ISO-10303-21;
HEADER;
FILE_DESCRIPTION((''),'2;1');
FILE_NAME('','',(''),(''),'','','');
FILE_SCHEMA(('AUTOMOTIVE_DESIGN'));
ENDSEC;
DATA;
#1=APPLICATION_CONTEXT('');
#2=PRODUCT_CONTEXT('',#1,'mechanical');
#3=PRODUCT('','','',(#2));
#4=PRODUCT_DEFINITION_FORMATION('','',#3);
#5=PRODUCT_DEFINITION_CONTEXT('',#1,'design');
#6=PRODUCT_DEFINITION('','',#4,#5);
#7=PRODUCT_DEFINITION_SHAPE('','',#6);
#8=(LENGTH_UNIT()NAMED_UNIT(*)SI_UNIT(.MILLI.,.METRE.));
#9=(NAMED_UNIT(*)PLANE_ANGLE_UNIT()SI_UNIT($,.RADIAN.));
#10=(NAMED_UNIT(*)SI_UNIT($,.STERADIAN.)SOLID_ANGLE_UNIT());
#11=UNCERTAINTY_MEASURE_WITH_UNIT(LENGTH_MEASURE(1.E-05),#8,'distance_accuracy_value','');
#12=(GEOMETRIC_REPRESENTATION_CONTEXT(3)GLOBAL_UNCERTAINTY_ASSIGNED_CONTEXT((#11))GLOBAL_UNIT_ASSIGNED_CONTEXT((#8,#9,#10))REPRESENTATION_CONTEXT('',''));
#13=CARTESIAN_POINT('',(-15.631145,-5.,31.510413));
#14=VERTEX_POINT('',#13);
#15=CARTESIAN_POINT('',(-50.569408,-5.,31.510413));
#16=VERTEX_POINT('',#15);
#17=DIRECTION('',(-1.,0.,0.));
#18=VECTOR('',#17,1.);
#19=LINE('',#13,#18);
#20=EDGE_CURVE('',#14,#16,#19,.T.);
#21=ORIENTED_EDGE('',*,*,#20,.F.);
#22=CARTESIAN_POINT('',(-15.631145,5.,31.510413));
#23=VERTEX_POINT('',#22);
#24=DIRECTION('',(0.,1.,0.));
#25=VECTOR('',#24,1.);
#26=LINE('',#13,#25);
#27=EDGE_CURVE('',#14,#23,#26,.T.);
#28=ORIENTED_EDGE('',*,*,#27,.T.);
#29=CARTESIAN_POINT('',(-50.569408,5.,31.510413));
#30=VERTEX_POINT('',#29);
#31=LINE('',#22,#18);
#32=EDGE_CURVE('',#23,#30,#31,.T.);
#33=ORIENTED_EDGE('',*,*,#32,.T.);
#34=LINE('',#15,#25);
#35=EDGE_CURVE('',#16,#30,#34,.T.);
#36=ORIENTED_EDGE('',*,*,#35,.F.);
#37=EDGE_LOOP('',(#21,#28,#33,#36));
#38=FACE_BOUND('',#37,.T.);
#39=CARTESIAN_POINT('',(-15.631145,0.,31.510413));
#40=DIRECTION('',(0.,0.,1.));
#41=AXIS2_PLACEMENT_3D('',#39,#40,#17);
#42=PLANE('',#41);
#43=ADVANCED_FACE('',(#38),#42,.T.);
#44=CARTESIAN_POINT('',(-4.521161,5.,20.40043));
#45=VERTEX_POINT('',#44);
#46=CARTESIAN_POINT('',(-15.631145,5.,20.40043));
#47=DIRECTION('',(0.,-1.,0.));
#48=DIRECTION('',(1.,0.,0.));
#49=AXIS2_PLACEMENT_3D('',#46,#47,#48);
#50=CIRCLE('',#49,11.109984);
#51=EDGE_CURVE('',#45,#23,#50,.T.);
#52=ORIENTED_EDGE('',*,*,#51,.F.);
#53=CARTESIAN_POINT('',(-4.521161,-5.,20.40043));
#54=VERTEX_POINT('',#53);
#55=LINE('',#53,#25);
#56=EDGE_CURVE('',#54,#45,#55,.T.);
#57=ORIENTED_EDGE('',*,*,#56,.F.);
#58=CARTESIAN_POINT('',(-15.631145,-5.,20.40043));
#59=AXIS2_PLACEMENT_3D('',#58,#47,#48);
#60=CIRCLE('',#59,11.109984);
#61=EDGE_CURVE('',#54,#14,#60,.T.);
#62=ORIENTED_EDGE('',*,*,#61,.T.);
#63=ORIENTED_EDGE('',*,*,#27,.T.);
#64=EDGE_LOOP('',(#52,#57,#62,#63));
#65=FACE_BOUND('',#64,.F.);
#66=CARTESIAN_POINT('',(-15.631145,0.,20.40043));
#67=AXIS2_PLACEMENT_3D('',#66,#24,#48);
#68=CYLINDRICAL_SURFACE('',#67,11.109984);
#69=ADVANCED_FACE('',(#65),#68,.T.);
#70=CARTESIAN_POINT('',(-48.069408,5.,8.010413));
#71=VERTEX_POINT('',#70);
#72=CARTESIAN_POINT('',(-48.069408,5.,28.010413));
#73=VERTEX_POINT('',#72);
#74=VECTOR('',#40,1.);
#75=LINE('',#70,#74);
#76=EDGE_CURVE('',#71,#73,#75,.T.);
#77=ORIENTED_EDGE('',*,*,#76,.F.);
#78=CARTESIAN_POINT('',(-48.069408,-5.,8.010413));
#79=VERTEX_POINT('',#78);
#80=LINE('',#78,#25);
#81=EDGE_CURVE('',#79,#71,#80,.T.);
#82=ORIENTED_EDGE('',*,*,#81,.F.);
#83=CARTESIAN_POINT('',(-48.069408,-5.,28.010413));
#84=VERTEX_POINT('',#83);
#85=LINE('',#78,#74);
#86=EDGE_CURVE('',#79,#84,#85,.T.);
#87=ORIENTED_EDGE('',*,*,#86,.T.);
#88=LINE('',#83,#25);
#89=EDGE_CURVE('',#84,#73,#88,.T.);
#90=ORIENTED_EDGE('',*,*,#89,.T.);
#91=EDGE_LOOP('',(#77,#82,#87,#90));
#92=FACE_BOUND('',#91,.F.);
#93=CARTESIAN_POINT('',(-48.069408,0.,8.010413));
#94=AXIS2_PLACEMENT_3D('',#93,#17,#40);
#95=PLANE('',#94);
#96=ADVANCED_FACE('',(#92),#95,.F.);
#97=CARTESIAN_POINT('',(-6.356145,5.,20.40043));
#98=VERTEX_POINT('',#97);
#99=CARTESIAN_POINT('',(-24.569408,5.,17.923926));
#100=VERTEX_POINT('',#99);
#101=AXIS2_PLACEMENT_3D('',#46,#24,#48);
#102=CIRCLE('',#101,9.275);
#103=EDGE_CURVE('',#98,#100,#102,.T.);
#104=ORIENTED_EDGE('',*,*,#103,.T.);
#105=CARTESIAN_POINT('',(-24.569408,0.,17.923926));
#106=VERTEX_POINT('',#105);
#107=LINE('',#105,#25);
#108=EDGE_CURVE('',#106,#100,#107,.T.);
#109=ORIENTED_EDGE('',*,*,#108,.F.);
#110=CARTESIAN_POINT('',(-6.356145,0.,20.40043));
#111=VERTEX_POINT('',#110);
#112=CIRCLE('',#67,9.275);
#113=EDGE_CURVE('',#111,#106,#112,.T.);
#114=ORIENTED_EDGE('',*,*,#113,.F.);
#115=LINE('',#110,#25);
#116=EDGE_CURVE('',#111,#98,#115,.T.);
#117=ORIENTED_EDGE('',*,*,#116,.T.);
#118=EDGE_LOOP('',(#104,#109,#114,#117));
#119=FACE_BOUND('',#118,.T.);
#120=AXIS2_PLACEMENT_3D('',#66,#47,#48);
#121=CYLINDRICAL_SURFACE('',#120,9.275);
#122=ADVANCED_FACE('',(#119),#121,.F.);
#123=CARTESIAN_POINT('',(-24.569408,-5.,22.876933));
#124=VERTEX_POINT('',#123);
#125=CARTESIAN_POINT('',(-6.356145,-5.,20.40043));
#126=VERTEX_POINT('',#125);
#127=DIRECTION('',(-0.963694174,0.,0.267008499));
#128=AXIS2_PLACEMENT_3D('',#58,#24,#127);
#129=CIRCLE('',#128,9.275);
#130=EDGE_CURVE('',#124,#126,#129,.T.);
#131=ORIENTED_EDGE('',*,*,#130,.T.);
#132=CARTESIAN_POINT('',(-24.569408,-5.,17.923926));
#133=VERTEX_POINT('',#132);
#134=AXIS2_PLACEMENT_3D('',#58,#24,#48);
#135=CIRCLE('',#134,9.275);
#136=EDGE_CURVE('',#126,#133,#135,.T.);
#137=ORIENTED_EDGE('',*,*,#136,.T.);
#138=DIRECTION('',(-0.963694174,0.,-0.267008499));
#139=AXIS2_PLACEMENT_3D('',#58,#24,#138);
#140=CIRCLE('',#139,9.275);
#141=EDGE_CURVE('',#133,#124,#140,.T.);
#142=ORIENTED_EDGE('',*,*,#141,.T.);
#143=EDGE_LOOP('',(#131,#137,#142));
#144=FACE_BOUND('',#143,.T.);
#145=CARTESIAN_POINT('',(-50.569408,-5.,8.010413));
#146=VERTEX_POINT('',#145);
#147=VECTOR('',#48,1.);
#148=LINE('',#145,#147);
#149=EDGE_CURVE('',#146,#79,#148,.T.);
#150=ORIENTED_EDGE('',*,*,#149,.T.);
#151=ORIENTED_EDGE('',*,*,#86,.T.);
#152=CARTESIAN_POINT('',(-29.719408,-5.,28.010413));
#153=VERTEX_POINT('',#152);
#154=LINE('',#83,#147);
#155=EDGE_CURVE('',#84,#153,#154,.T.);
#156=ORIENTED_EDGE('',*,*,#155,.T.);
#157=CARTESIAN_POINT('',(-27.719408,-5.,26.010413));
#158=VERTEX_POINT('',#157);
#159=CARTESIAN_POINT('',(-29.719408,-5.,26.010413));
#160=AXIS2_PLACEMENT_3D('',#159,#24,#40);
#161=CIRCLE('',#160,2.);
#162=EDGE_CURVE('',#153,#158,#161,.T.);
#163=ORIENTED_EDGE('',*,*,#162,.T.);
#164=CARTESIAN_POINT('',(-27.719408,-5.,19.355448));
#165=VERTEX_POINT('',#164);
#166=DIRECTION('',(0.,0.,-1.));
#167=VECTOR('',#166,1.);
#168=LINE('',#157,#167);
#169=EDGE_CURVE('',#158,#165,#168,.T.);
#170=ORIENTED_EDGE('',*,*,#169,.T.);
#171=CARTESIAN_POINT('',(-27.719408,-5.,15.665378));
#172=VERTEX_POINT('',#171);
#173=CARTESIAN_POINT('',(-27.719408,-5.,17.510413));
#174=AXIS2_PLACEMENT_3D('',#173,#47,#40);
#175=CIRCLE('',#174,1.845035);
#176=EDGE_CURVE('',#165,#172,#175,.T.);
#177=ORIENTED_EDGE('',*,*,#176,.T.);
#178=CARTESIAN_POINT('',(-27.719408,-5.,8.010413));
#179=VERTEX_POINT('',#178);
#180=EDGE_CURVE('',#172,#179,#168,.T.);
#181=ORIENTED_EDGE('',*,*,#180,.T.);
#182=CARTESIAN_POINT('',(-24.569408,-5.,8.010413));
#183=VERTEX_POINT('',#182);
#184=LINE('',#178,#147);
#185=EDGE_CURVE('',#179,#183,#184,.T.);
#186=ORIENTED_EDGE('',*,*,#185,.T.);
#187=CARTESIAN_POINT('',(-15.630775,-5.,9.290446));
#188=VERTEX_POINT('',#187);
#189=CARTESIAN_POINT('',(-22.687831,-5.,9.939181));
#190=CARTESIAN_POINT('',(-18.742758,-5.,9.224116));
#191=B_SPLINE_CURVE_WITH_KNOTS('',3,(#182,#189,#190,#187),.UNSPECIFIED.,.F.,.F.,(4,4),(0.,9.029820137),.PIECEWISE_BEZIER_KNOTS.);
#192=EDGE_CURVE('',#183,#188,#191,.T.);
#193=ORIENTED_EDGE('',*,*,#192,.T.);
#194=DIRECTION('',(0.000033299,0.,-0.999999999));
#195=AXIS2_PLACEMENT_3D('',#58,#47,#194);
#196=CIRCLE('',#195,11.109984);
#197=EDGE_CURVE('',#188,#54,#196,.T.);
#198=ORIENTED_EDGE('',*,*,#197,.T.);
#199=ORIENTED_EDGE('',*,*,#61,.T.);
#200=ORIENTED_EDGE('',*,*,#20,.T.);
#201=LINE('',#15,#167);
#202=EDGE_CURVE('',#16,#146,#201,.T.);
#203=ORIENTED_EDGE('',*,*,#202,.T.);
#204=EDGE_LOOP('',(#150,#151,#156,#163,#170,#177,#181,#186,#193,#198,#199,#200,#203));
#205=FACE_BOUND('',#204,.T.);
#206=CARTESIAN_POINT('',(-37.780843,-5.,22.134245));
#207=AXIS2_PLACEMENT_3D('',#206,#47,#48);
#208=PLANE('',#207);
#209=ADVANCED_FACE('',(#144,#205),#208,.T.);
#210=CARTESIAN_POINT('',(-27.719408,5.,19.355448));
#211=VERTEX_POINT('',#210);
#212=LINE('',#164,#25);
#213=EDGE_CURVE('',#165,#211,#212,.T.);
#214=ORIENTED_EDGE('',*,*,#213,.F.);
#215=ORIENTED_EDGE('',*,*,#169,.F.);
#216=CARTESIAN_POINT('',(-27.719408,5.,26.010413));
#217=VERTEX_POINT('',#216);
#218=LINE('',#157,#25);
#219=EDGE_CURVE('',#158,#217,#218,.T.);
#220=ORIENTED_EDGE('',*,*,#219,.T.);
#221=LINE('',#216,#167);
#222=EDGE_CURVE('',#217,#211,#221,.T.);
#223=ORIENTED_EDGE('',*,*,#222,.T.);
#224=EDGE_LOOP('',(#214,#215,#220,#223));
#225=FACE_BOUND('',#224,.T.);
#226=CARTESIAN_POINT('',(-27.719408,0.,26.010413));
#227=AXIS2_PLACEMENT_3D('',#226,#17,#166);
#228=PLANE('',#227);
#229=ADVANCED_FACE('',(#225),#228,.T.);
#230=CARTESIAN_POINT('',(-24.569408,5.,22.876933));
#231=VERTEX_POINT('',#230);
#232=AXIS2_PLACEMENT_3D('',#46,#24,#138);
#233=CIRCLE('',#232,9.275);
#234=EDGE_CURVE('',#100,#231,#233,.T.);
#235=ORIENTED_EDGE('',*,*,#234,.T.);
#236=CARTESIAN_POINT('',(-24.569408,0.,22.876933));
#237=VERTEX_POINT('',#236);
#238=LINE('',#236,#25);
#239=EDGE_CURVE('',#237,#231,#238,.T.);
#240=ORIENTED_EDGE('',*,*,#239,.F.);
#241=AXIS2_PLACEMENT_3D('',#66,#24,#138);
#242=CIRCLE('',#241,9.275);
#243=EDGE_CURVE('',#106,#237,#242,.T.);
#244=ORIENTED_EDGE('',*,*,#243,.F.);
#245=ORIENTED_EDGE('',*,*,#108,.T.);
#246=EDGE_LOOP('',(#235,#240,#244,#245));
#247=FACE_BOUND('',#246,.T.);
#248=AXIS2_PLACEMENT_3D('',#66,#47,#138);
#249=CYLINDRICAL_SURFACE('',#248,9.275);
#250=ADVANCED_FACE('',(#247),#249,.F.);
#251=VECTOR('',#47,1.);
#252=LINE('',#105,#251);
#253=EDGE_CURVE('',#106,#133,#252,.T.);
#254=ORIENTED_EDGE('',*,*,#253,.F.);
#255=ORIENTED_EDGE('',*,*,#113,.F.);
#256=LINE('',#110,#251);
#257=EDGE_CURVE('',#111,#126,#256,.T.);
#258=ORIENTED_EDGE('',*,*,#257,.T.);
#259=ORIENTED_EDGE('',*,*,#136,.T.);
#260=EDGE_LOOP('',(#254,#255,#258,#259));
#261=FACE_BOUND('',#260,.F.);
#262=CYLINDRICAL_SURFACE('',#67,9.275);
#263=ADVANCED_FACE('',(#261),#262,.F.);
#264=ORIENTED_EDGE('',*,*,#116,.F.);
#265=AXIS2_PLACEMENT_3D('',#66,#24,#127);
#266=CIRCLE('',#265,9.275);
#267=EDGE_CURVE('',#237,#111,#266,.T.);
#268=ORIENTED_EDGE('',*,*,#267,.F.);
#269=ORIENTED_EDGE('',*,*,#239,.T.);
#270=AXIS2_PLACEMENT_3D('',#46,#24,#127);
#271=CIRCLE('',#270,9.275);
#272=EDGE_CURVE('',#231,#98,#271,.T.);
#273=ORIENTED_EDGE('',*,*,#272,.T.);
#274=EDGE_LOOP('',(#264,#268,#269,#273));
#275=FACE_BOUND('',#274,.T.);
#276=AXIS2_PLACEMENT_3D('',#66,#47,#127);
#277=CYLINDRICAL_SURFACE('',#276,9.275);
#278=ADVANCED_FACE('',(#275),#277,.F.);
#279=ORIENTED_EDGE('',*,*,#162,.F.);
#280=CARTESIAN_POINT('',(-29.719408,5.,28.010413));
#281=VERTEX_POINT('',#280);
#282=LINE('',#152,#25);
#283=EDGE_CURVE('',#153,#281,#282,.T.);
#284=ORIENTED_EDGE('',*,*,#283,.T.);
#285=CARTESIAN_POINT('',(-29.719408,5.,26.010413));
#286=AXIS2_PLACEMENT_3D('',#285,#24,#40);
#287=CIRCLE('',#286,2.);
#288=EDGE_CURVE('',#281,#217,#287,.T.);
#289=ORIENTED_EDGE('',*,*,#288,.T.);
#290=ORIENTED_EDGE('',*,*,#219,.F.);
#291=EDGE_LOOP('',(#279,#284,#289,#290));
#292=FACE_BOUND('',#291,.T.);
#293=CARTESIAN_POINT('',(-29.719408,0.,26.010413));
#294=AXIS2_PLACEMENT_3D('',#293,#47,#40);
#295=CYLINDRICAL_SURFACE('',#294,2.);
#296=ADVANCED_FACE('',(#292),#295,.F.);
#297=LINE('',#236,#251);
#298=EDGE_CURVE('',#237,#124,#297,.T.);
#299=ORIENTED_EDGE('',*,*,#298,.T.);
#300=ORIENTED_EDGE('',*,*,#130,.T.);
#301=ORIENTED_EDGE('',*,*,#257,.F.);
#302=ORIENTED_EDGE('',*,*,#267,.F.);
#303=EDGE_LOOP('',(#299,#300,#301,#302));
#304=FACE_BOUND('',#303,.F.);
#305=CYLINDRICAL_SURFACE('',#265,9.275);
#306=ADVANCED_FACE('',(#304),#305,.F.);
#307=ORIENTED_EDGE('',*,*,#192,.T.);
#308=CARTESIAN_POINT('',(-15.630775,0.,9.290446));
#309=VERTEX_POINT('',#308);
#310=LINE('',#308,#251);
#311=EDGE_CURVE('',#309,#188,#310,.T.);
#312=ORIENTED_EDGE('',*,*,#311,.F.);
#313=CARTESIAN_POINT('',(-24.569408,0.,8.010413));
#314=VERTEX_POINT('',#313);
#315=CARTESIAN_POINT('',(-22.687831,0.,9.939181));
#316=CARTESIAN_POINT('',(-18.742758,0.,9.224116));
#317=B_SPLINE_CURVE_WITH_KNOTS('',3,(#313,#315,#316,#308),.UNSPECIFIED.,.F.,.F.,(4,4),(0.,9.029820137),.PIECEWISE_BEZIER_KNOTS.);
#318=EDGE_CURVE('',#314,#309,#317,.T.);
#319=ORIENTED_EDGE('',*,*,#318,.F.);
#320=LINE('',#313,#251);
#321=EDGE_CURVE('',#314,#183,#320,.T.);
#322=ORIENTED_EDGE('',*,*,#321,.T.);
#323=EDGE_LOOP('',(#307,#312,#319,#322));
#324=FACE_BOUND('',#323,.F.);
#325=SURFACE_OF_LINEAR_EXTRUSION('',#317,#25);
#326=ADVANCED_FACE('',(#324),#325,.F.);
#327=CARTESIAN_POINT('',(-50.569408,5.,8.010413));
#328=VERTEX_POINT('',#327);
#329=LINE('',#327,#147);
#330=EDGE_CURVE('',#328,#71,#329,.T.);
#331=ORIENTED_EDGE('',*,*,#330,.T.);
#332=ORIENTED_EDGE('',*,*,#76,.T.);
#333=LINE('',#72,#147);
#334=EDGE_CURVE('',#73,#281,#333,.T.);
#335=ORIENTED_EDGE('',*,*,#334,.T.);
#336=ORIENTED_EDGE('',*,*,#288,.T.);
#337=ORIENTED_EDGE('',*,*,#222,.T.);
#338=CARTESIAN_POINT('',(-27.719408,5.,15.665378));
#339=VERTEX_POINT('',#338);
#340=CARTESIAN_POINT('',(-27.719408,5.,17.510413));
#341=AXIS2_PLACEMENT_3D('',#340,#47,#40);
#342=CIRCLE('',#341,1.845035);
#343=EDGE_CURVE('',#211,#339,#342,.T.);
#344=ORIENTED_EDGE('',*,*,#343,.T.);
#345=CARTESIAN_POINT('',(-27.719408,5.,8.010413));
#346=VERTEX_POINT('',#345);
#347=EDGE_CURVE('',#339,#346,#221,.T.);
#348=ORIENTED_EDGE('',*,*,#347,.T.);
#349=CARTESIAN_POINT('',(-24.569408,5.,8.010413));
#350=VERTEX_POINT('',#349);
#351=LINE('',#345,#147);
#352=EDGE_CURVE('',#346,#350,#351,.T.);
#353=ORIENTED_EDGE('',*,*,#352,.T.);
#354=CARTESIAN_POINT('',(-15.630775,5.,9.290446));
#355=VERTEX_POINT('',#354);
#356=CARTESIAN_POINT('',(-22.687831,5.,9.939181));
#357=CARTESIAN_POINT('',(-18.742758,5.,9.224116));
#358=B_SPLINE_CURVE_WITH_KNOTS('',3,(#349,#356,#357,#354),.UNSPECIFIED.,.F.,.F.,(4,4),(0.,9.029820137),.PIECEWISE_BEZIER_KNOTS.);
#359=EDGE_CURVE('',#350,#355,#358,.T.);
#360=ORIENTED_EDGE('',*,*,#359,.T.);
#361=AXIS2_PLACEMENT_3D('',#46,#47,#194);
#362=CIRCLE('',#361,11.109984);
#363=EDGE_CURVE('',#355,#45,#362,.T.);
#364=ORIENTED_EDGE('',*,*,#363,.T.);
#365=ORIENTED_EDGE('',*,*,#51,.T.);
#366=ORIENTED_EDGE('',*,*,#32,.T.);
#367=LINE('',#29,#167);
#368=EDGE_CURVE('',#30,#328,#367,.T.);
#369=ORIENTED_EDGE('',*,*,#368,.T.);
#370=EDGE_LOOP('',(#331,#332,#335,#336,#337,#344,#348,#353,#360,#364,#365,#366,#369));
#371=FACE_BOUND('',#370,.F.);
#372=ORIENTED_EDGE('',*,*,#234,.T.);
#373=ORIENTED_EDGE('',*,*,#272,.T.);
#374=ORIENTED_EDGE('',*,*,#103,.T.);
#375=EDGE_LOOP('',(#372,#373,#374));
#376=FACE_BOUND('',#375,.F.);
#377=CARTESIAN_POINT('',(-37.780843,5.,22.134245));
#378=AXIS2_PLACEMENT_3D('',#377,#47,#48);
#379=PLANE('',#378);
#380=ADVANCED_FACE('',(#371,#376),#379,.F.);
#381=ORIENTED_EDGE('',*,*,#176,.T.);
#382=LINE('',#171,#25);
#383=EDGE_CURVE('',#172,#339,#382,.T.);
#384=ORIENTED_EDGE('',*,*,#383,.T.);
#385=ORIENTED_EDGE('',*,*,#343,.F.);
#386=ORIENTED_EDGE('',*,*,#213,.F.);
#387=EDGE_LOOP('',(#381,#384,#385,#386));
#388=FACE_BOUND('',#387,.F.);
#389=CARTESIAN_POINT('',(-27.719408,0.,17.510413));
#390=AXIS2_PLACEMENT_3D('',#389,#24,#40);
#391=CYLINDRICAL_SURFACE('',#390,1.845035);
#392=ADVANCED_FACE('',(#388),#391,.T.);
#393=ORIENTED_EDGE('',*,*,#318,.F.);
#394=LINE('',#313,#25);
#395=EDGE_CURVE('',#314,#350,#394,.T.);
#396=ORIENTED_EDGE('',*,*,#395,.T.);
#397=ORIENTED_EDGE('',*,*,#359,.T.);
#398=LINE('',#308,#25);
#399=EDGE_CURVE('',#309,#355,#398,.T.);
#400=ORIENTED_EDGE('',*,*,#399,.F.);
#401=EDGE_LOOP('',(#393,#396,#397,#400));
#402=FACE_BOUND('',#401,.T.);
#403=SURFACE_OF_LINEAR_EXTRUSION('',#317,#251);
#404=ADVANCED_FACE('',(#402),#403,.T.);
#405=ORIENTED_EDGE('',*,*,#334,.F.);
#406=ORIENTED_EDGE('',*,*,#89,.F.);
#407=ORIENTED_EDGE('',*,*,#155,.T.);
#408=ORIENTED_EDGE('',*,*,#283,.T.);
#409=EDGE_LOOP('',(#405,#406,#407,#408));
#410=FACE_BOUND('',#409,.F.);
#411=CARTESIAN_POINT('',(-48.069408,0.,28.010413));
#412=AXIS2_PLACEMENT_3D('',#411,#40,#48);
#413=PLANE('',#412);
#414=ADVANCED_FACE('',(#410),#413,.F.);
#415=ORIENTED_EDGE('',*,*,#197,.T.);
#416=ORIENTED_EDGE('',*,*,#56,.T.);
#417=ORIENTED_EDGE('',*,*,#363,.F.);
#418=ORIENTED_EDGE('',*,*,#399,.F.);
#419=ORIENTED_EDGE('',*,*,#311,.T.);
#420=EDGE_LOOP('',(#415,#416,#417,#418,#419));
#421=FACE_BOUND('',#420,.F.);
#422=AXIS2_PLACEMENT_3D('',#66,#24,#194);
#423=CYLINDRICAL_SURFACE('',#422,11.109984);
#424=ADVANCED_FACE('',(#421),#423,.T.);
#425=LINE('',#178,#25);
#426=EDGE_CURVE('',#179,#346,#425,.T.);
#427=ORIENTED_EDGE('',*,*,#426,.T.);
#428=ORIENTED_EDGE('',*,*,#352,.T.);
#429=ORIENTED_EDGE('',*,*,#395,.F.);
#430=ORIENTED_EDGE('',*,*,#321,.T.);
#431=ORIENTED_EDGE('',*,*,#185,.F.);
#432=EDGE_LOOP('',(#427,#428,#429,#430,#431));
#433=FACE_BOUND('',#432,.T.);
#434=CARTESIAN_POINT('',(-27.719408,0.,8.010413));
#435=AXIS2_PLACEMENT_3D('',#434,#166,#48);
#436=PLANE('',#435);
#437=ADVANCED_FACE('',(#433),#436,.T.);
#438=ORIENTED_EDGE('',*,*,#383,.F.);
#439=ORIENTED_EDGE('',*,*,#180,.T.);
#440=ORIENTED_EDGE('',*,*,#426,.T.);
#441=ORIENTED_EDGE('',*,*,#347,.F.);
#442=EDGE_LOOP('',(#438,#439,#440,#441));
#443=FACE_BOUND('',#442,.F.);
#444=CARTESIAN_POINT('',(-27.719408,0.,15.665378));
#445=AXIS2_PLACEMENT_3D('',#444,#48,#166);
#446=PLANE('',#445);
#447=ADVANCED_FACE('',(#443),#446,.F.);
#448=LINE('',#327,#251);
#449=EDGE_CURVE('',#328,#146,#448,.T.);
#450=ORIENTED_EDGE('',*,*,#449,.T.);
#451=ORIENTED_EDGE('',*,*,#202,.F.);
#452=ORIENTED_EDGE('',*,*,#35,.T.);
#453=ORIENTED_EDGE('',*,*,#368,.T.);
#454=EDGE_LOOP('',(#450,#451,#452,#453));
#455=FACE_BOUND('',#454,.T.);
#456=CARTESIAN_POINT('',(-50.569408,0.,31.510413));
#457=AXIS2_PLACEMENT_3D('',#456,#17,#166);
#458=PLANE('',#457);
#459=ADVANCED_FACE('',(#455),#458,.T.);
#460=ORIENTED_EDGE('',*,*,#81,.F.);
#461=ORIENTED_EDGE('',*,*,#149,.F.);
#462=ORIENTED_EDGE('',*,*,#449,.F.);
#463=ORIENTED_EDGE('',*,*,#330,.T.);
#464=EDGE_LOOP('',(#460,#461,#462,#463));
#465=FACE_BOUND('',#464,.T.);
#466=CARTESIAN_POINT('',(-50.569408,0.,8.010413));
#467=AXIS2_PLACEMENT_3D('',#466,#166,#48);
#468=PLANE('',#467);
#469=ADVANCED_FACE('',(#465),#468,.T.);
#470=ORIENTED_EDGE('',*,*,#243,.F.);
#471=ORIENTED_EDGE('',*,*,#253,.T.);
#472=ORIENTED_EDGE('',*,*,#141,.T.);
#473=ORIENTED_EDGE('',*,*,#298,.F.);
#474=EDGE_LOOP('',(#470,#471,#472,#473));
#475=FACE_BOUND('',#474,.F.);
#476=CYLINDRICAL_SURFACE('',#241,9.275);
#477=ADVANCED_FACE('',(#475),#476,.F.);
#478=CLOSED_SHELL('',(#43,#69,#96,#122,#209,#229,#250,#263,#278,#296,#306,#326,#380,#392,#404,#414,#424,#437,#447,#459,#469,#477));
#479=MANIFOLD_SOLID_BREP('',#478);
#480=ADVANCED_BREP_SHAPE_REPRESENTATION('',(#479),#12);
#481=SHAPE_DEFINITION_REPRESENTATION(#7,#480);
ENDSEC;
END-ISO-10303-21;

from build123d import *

# Parameters (mm, degrees)
F1_DEPTH = 5


with BuildPart() as f1:
    # F0 (on Front) → F1 (new body, symmetric)
    with BuildSketch(Plane.XZ):
        with BuildLine():
            Line((-24.5694083333, 31.5104130507), (-50.5694083333, 31.5104130507))
            Line((-50.5694083333, 31.5104130507), (-50.5694083333, 8.0104130507))
            Line((-50.5694083333, 8.0104130507), (-48.0694083333, 8.0104130507))
            Line((-48.0694083333, 8.0104130507), (-48.0694083333, 28.0104130507))
            Line((-48.0694083333, 28.0104130507), (-29.7194083333, 28.0104130507))
            ThreePointArc((-29.7194083333, 28.0104130507), (-28.3051947709, 27.424626613), (-27.7194083333, 26.0104130507))
            Line((-27.7194083333, 26.0104130507), (-27.7194083333, 19.3554483443))
            Line((-27.7194083333, 19.3554483443), (-27.7194083333, 15.665377757))
            Line((-27.7194083333, 15.665377757), (-27.7194083333, 8.0104130507))
            Line((-27.7194083333, 8.0104130507), (-24.5694083333, 8.0104130507))
            Line((-24.5694083333, 8.0104130507), (-24.5694083333, 13.8020069146))
            ThreePointArc((-24.5694083333, 13.8020069146), (-26.7411284149, 20.4004295021), (-24.5694083333, 26.9988520897))
            Line((-24.5694083333, 26.9988520897), (-24.5694083333, 31.5104130507))
        make_face()
        with BuildLine():
            ThreePointArc((-15.6311448663, 31.5104130507), (-20.6373094688, 30.3185971969), (-24.5694083333, 26.9988520897))
            Line((-24.5694083333, 26.9988520897), (-24.5694083333, 22.8769333271))
            ThreePointArc((-24.5694083333, 22.8769333271), (-14.3814986476, 29.5908598146), (-6.3561448663, 20.4004295021))
            ThreePointArc((-6.3561448663, 20.4004295021), (-14.3814986476, 11.2099991897), (-24.5694083333, 17.9239256771))
            Line((-24.5694083333, 17.9239256771), (-24.5694083333, 13.8020069146))
            ThreePointArc((-24.5694083333, 13.8020069146), (-20.6371443338, 10.4821784577), (-15.630774911, 9.2904459598))
            ThreePointArc((-15.630774911, 9.2904459598), (-7.7750693624, 12.5446155962), (-4.5211613178, 20.4004295021))
            ThreePointArc((-4.5211613178, 20.4004295021), (-7.7752001603, 28.2563742082), (-15.6311448663, 31.5104130507))
        make_face()
        with BuildLine():
            Line((-24.5694083333, 22.8769333271), (-24.5694083333, 26.9988520897))
            ThreePointArc((-24.5694083333, 26.9988520897), (-26.7411284149, 20.4004295021), (-24.5694083333, 13.8020069146))
            Line((-24.5694083333, 13.8020069146), (-24.5694083333, 17.9239256771))
            ThreePointArc((-24.5694083333, 17.9239256771), (-24.9061448663, 20.4004295021), (-24.5694083333, 22.8769333271))
        make_face()
        with BuildLine():
            ThreePointArc((-15.630774911, 9.2904459598), (-20.6371443338, 10.4821784577), (-24.5694083333, 13.8020069146))
            Line((-24.5694083333, 13.8020069146), (-24.5694083333, 8.0104130507))
            add(Edge.make_bspline(
                [(-24.5694083333, 8.0104130507), (-22.6878308277, 9.9391806871), (-18.7427580517, 9.2241163725), (-15.630774911, 9.2904459598)],
                knots=[0, 0, 0, 0, 9.029820137, 9.029820137, 9.029820137, 9.029820137], degree=3))
        make_face()
        with BuildLine():
            Line((-27.7194083333, 15.665377757), (-27.7194083333, 19.3554483443))
            ThreePointArc((-27.7194083333, 19.3554483443), (-29.564443627, 17.5104130507), (-27.7194083333, 15.665377757))
        make_face()
        with BuildLine():
            Line((-15.6311448663, 31.5104130507), (-24.5694083333, 31.5104130507))
            Line((-24.5694083333, 31.5104130507), (-24.5694083333, 26.9988520897))
            ThreePointArc((-24.5694083333, 26.9988520897), (-20.6373094688, 30.3185971969), (-15.6311448663, 31.5104130507))
        make_face()
    extrude(amount=F1_DEPTH, both=True)


solid = f1.part
